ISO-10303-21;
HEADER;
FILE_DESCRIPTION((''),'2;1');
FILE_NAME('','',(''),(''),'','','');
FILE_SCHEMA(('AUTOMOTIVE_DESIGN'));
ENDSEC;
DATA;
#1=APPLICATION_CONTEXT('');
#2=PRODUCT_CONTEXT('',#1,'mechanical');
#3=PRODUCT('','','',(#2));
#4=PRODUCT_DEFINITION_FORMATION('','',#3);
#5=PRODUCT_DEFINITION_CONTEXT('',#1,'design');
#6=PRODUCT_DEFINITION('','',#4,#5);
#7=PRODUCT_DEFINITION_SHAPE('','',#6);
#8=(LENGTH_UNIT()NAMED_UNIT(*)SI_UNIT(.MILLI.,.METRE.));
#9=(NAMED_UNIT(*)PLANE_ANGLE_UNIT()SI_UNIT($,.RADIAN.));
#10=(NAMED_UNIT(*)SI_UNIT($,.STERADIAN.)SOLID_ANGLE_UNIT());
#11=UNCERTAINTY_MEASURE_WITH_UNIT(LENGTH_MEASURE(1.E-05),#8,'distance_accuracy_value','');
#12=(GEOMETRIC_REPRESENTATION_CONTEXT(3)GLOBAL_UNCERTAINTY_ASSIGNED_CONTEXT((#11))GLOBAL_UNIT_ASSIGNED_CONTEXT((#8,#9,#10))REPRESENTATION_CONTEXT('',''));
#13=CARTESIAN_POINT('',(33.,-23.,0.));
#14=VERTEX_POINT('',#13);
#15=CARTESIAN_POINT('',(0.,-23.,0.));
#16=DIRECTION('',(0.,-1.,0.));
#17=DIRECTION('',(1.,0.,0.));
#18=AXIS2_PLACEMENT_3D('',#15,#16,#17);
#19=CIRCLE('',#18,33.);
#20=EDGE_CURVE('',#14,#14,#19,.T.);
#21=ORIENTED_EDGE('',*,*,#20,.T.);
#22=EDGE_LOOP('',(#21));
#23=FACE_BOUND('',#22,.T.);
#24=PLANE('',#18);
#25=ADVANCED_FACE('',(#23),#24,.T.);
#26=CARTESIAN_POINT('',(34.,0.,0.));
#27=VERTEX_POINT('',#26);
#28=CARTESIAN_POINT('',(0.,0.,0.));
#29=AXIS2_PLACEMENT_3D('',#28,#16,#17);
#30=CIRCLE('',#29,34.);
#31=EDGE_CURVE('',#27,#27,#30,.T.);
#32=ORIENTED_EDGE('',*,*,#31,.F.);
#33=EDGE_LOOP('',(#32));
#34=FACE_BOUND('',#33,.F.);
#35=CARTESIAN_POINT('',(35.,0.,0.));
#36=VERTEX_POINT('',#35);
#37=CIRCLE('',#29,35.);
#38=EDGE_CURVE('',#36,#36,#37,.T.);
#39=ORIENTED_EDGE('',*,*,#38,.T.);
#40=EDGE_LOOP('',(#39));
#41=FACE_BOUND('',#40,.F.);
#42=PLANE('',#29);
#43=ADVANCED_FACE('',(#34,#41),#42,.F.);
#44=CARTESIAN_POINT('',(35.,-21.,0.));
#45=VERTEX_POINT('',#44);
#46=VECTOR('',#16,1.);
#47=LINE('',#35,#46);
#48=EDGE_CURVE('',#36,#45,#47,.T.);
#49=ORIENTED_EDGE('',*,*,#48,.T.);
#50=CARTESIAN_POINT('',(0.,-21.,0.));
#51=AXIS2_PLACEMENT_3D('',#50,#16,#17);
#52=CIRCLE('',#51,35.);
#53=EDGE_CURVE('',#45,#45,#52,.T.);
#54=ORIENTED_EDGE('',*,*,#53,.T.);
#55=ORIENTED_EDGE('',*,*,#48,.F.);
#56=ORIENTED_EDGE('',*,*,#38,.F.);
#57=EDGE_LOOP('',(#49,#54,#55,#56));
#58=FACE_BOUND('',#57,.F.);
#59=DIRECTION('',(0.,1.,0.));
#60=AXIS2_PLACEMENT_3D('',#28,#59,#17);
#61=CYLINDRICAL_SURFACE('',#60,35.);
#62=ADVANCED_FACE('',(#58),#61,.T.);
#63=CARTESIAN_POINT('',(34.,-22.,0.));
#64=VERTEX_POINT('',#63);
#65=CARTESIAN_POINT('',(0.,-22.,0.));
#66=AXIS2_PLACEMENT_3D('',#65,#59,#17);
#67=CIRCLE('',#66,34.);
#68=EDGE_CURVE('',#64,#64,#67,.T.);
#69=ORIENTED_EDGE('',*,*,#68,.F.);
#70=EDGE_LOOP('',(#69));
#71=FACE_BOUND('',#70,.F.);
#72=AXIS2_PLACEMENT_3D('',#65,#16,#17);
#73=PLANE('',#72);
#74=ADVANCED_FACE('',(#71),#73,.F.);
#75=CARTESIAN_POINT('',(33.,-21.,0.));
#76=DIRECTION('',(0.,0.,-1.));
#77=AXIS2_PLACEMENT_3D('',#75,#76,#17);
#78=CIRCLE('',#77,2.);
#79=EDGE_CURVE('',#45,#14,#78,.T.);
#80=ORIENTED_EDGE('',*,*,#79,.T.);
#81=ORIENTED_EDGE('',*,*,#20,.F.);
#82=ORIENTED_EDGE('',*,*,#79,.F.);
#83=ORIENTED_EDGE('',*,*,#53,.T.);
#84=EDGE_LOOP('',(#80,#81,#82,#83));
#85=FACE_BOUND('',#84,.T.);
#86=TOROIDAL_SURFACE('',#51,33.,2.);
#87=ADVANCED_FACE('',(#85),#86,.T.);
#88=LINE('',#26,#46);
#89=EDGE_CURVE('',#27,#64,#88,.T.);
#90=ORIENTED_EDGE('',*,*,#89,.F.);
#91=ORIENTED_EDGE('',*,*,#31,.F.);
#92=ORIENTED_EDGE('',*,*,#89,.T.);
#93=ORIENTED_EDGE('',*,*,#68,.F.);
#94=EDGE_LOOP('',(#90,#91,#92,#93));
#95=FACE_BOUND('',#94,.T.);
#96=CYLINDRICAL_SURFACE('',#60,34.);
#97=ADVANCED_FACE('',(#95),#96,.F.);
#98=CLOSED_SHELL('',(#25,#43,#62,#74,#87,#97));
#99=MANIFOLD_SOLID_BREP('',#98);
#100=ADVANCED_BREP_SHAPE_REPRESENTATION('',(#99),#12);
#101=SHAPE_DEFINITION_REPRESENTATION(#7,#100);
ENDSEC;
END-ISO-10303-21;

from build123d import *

# Parameters (mm, degrees)
F0_R     = 35
F1_DEPTH = 23
F2_T     = -1
F3_R     = 2


# Not quite as in the source:
# - a feature of the source that left no trace in its solid (it failed there, or was rolled back) is left out


with BuildPart() as f1:
    # F0 (on Front) → F1 (new body)
    with BuildSketch(Plane.XZ):
        Circle(F0_R)
    extrude(amount=F1_DEPTH)

    # F2
    f2_openings = [f1.faces().sort_by_distance(p)[0] for p in [
        (0, 0, 0),
    ]]
    offset(amount=F2_T, openings=f2_openings)

    # F3
    f3_edges = [f1.edges().sort_by_distance(p)[0] for p in [
        (-35, -23, 0),
    ]]
    fillet(f3_edges, radius=F3_R)


solid = f1.part
